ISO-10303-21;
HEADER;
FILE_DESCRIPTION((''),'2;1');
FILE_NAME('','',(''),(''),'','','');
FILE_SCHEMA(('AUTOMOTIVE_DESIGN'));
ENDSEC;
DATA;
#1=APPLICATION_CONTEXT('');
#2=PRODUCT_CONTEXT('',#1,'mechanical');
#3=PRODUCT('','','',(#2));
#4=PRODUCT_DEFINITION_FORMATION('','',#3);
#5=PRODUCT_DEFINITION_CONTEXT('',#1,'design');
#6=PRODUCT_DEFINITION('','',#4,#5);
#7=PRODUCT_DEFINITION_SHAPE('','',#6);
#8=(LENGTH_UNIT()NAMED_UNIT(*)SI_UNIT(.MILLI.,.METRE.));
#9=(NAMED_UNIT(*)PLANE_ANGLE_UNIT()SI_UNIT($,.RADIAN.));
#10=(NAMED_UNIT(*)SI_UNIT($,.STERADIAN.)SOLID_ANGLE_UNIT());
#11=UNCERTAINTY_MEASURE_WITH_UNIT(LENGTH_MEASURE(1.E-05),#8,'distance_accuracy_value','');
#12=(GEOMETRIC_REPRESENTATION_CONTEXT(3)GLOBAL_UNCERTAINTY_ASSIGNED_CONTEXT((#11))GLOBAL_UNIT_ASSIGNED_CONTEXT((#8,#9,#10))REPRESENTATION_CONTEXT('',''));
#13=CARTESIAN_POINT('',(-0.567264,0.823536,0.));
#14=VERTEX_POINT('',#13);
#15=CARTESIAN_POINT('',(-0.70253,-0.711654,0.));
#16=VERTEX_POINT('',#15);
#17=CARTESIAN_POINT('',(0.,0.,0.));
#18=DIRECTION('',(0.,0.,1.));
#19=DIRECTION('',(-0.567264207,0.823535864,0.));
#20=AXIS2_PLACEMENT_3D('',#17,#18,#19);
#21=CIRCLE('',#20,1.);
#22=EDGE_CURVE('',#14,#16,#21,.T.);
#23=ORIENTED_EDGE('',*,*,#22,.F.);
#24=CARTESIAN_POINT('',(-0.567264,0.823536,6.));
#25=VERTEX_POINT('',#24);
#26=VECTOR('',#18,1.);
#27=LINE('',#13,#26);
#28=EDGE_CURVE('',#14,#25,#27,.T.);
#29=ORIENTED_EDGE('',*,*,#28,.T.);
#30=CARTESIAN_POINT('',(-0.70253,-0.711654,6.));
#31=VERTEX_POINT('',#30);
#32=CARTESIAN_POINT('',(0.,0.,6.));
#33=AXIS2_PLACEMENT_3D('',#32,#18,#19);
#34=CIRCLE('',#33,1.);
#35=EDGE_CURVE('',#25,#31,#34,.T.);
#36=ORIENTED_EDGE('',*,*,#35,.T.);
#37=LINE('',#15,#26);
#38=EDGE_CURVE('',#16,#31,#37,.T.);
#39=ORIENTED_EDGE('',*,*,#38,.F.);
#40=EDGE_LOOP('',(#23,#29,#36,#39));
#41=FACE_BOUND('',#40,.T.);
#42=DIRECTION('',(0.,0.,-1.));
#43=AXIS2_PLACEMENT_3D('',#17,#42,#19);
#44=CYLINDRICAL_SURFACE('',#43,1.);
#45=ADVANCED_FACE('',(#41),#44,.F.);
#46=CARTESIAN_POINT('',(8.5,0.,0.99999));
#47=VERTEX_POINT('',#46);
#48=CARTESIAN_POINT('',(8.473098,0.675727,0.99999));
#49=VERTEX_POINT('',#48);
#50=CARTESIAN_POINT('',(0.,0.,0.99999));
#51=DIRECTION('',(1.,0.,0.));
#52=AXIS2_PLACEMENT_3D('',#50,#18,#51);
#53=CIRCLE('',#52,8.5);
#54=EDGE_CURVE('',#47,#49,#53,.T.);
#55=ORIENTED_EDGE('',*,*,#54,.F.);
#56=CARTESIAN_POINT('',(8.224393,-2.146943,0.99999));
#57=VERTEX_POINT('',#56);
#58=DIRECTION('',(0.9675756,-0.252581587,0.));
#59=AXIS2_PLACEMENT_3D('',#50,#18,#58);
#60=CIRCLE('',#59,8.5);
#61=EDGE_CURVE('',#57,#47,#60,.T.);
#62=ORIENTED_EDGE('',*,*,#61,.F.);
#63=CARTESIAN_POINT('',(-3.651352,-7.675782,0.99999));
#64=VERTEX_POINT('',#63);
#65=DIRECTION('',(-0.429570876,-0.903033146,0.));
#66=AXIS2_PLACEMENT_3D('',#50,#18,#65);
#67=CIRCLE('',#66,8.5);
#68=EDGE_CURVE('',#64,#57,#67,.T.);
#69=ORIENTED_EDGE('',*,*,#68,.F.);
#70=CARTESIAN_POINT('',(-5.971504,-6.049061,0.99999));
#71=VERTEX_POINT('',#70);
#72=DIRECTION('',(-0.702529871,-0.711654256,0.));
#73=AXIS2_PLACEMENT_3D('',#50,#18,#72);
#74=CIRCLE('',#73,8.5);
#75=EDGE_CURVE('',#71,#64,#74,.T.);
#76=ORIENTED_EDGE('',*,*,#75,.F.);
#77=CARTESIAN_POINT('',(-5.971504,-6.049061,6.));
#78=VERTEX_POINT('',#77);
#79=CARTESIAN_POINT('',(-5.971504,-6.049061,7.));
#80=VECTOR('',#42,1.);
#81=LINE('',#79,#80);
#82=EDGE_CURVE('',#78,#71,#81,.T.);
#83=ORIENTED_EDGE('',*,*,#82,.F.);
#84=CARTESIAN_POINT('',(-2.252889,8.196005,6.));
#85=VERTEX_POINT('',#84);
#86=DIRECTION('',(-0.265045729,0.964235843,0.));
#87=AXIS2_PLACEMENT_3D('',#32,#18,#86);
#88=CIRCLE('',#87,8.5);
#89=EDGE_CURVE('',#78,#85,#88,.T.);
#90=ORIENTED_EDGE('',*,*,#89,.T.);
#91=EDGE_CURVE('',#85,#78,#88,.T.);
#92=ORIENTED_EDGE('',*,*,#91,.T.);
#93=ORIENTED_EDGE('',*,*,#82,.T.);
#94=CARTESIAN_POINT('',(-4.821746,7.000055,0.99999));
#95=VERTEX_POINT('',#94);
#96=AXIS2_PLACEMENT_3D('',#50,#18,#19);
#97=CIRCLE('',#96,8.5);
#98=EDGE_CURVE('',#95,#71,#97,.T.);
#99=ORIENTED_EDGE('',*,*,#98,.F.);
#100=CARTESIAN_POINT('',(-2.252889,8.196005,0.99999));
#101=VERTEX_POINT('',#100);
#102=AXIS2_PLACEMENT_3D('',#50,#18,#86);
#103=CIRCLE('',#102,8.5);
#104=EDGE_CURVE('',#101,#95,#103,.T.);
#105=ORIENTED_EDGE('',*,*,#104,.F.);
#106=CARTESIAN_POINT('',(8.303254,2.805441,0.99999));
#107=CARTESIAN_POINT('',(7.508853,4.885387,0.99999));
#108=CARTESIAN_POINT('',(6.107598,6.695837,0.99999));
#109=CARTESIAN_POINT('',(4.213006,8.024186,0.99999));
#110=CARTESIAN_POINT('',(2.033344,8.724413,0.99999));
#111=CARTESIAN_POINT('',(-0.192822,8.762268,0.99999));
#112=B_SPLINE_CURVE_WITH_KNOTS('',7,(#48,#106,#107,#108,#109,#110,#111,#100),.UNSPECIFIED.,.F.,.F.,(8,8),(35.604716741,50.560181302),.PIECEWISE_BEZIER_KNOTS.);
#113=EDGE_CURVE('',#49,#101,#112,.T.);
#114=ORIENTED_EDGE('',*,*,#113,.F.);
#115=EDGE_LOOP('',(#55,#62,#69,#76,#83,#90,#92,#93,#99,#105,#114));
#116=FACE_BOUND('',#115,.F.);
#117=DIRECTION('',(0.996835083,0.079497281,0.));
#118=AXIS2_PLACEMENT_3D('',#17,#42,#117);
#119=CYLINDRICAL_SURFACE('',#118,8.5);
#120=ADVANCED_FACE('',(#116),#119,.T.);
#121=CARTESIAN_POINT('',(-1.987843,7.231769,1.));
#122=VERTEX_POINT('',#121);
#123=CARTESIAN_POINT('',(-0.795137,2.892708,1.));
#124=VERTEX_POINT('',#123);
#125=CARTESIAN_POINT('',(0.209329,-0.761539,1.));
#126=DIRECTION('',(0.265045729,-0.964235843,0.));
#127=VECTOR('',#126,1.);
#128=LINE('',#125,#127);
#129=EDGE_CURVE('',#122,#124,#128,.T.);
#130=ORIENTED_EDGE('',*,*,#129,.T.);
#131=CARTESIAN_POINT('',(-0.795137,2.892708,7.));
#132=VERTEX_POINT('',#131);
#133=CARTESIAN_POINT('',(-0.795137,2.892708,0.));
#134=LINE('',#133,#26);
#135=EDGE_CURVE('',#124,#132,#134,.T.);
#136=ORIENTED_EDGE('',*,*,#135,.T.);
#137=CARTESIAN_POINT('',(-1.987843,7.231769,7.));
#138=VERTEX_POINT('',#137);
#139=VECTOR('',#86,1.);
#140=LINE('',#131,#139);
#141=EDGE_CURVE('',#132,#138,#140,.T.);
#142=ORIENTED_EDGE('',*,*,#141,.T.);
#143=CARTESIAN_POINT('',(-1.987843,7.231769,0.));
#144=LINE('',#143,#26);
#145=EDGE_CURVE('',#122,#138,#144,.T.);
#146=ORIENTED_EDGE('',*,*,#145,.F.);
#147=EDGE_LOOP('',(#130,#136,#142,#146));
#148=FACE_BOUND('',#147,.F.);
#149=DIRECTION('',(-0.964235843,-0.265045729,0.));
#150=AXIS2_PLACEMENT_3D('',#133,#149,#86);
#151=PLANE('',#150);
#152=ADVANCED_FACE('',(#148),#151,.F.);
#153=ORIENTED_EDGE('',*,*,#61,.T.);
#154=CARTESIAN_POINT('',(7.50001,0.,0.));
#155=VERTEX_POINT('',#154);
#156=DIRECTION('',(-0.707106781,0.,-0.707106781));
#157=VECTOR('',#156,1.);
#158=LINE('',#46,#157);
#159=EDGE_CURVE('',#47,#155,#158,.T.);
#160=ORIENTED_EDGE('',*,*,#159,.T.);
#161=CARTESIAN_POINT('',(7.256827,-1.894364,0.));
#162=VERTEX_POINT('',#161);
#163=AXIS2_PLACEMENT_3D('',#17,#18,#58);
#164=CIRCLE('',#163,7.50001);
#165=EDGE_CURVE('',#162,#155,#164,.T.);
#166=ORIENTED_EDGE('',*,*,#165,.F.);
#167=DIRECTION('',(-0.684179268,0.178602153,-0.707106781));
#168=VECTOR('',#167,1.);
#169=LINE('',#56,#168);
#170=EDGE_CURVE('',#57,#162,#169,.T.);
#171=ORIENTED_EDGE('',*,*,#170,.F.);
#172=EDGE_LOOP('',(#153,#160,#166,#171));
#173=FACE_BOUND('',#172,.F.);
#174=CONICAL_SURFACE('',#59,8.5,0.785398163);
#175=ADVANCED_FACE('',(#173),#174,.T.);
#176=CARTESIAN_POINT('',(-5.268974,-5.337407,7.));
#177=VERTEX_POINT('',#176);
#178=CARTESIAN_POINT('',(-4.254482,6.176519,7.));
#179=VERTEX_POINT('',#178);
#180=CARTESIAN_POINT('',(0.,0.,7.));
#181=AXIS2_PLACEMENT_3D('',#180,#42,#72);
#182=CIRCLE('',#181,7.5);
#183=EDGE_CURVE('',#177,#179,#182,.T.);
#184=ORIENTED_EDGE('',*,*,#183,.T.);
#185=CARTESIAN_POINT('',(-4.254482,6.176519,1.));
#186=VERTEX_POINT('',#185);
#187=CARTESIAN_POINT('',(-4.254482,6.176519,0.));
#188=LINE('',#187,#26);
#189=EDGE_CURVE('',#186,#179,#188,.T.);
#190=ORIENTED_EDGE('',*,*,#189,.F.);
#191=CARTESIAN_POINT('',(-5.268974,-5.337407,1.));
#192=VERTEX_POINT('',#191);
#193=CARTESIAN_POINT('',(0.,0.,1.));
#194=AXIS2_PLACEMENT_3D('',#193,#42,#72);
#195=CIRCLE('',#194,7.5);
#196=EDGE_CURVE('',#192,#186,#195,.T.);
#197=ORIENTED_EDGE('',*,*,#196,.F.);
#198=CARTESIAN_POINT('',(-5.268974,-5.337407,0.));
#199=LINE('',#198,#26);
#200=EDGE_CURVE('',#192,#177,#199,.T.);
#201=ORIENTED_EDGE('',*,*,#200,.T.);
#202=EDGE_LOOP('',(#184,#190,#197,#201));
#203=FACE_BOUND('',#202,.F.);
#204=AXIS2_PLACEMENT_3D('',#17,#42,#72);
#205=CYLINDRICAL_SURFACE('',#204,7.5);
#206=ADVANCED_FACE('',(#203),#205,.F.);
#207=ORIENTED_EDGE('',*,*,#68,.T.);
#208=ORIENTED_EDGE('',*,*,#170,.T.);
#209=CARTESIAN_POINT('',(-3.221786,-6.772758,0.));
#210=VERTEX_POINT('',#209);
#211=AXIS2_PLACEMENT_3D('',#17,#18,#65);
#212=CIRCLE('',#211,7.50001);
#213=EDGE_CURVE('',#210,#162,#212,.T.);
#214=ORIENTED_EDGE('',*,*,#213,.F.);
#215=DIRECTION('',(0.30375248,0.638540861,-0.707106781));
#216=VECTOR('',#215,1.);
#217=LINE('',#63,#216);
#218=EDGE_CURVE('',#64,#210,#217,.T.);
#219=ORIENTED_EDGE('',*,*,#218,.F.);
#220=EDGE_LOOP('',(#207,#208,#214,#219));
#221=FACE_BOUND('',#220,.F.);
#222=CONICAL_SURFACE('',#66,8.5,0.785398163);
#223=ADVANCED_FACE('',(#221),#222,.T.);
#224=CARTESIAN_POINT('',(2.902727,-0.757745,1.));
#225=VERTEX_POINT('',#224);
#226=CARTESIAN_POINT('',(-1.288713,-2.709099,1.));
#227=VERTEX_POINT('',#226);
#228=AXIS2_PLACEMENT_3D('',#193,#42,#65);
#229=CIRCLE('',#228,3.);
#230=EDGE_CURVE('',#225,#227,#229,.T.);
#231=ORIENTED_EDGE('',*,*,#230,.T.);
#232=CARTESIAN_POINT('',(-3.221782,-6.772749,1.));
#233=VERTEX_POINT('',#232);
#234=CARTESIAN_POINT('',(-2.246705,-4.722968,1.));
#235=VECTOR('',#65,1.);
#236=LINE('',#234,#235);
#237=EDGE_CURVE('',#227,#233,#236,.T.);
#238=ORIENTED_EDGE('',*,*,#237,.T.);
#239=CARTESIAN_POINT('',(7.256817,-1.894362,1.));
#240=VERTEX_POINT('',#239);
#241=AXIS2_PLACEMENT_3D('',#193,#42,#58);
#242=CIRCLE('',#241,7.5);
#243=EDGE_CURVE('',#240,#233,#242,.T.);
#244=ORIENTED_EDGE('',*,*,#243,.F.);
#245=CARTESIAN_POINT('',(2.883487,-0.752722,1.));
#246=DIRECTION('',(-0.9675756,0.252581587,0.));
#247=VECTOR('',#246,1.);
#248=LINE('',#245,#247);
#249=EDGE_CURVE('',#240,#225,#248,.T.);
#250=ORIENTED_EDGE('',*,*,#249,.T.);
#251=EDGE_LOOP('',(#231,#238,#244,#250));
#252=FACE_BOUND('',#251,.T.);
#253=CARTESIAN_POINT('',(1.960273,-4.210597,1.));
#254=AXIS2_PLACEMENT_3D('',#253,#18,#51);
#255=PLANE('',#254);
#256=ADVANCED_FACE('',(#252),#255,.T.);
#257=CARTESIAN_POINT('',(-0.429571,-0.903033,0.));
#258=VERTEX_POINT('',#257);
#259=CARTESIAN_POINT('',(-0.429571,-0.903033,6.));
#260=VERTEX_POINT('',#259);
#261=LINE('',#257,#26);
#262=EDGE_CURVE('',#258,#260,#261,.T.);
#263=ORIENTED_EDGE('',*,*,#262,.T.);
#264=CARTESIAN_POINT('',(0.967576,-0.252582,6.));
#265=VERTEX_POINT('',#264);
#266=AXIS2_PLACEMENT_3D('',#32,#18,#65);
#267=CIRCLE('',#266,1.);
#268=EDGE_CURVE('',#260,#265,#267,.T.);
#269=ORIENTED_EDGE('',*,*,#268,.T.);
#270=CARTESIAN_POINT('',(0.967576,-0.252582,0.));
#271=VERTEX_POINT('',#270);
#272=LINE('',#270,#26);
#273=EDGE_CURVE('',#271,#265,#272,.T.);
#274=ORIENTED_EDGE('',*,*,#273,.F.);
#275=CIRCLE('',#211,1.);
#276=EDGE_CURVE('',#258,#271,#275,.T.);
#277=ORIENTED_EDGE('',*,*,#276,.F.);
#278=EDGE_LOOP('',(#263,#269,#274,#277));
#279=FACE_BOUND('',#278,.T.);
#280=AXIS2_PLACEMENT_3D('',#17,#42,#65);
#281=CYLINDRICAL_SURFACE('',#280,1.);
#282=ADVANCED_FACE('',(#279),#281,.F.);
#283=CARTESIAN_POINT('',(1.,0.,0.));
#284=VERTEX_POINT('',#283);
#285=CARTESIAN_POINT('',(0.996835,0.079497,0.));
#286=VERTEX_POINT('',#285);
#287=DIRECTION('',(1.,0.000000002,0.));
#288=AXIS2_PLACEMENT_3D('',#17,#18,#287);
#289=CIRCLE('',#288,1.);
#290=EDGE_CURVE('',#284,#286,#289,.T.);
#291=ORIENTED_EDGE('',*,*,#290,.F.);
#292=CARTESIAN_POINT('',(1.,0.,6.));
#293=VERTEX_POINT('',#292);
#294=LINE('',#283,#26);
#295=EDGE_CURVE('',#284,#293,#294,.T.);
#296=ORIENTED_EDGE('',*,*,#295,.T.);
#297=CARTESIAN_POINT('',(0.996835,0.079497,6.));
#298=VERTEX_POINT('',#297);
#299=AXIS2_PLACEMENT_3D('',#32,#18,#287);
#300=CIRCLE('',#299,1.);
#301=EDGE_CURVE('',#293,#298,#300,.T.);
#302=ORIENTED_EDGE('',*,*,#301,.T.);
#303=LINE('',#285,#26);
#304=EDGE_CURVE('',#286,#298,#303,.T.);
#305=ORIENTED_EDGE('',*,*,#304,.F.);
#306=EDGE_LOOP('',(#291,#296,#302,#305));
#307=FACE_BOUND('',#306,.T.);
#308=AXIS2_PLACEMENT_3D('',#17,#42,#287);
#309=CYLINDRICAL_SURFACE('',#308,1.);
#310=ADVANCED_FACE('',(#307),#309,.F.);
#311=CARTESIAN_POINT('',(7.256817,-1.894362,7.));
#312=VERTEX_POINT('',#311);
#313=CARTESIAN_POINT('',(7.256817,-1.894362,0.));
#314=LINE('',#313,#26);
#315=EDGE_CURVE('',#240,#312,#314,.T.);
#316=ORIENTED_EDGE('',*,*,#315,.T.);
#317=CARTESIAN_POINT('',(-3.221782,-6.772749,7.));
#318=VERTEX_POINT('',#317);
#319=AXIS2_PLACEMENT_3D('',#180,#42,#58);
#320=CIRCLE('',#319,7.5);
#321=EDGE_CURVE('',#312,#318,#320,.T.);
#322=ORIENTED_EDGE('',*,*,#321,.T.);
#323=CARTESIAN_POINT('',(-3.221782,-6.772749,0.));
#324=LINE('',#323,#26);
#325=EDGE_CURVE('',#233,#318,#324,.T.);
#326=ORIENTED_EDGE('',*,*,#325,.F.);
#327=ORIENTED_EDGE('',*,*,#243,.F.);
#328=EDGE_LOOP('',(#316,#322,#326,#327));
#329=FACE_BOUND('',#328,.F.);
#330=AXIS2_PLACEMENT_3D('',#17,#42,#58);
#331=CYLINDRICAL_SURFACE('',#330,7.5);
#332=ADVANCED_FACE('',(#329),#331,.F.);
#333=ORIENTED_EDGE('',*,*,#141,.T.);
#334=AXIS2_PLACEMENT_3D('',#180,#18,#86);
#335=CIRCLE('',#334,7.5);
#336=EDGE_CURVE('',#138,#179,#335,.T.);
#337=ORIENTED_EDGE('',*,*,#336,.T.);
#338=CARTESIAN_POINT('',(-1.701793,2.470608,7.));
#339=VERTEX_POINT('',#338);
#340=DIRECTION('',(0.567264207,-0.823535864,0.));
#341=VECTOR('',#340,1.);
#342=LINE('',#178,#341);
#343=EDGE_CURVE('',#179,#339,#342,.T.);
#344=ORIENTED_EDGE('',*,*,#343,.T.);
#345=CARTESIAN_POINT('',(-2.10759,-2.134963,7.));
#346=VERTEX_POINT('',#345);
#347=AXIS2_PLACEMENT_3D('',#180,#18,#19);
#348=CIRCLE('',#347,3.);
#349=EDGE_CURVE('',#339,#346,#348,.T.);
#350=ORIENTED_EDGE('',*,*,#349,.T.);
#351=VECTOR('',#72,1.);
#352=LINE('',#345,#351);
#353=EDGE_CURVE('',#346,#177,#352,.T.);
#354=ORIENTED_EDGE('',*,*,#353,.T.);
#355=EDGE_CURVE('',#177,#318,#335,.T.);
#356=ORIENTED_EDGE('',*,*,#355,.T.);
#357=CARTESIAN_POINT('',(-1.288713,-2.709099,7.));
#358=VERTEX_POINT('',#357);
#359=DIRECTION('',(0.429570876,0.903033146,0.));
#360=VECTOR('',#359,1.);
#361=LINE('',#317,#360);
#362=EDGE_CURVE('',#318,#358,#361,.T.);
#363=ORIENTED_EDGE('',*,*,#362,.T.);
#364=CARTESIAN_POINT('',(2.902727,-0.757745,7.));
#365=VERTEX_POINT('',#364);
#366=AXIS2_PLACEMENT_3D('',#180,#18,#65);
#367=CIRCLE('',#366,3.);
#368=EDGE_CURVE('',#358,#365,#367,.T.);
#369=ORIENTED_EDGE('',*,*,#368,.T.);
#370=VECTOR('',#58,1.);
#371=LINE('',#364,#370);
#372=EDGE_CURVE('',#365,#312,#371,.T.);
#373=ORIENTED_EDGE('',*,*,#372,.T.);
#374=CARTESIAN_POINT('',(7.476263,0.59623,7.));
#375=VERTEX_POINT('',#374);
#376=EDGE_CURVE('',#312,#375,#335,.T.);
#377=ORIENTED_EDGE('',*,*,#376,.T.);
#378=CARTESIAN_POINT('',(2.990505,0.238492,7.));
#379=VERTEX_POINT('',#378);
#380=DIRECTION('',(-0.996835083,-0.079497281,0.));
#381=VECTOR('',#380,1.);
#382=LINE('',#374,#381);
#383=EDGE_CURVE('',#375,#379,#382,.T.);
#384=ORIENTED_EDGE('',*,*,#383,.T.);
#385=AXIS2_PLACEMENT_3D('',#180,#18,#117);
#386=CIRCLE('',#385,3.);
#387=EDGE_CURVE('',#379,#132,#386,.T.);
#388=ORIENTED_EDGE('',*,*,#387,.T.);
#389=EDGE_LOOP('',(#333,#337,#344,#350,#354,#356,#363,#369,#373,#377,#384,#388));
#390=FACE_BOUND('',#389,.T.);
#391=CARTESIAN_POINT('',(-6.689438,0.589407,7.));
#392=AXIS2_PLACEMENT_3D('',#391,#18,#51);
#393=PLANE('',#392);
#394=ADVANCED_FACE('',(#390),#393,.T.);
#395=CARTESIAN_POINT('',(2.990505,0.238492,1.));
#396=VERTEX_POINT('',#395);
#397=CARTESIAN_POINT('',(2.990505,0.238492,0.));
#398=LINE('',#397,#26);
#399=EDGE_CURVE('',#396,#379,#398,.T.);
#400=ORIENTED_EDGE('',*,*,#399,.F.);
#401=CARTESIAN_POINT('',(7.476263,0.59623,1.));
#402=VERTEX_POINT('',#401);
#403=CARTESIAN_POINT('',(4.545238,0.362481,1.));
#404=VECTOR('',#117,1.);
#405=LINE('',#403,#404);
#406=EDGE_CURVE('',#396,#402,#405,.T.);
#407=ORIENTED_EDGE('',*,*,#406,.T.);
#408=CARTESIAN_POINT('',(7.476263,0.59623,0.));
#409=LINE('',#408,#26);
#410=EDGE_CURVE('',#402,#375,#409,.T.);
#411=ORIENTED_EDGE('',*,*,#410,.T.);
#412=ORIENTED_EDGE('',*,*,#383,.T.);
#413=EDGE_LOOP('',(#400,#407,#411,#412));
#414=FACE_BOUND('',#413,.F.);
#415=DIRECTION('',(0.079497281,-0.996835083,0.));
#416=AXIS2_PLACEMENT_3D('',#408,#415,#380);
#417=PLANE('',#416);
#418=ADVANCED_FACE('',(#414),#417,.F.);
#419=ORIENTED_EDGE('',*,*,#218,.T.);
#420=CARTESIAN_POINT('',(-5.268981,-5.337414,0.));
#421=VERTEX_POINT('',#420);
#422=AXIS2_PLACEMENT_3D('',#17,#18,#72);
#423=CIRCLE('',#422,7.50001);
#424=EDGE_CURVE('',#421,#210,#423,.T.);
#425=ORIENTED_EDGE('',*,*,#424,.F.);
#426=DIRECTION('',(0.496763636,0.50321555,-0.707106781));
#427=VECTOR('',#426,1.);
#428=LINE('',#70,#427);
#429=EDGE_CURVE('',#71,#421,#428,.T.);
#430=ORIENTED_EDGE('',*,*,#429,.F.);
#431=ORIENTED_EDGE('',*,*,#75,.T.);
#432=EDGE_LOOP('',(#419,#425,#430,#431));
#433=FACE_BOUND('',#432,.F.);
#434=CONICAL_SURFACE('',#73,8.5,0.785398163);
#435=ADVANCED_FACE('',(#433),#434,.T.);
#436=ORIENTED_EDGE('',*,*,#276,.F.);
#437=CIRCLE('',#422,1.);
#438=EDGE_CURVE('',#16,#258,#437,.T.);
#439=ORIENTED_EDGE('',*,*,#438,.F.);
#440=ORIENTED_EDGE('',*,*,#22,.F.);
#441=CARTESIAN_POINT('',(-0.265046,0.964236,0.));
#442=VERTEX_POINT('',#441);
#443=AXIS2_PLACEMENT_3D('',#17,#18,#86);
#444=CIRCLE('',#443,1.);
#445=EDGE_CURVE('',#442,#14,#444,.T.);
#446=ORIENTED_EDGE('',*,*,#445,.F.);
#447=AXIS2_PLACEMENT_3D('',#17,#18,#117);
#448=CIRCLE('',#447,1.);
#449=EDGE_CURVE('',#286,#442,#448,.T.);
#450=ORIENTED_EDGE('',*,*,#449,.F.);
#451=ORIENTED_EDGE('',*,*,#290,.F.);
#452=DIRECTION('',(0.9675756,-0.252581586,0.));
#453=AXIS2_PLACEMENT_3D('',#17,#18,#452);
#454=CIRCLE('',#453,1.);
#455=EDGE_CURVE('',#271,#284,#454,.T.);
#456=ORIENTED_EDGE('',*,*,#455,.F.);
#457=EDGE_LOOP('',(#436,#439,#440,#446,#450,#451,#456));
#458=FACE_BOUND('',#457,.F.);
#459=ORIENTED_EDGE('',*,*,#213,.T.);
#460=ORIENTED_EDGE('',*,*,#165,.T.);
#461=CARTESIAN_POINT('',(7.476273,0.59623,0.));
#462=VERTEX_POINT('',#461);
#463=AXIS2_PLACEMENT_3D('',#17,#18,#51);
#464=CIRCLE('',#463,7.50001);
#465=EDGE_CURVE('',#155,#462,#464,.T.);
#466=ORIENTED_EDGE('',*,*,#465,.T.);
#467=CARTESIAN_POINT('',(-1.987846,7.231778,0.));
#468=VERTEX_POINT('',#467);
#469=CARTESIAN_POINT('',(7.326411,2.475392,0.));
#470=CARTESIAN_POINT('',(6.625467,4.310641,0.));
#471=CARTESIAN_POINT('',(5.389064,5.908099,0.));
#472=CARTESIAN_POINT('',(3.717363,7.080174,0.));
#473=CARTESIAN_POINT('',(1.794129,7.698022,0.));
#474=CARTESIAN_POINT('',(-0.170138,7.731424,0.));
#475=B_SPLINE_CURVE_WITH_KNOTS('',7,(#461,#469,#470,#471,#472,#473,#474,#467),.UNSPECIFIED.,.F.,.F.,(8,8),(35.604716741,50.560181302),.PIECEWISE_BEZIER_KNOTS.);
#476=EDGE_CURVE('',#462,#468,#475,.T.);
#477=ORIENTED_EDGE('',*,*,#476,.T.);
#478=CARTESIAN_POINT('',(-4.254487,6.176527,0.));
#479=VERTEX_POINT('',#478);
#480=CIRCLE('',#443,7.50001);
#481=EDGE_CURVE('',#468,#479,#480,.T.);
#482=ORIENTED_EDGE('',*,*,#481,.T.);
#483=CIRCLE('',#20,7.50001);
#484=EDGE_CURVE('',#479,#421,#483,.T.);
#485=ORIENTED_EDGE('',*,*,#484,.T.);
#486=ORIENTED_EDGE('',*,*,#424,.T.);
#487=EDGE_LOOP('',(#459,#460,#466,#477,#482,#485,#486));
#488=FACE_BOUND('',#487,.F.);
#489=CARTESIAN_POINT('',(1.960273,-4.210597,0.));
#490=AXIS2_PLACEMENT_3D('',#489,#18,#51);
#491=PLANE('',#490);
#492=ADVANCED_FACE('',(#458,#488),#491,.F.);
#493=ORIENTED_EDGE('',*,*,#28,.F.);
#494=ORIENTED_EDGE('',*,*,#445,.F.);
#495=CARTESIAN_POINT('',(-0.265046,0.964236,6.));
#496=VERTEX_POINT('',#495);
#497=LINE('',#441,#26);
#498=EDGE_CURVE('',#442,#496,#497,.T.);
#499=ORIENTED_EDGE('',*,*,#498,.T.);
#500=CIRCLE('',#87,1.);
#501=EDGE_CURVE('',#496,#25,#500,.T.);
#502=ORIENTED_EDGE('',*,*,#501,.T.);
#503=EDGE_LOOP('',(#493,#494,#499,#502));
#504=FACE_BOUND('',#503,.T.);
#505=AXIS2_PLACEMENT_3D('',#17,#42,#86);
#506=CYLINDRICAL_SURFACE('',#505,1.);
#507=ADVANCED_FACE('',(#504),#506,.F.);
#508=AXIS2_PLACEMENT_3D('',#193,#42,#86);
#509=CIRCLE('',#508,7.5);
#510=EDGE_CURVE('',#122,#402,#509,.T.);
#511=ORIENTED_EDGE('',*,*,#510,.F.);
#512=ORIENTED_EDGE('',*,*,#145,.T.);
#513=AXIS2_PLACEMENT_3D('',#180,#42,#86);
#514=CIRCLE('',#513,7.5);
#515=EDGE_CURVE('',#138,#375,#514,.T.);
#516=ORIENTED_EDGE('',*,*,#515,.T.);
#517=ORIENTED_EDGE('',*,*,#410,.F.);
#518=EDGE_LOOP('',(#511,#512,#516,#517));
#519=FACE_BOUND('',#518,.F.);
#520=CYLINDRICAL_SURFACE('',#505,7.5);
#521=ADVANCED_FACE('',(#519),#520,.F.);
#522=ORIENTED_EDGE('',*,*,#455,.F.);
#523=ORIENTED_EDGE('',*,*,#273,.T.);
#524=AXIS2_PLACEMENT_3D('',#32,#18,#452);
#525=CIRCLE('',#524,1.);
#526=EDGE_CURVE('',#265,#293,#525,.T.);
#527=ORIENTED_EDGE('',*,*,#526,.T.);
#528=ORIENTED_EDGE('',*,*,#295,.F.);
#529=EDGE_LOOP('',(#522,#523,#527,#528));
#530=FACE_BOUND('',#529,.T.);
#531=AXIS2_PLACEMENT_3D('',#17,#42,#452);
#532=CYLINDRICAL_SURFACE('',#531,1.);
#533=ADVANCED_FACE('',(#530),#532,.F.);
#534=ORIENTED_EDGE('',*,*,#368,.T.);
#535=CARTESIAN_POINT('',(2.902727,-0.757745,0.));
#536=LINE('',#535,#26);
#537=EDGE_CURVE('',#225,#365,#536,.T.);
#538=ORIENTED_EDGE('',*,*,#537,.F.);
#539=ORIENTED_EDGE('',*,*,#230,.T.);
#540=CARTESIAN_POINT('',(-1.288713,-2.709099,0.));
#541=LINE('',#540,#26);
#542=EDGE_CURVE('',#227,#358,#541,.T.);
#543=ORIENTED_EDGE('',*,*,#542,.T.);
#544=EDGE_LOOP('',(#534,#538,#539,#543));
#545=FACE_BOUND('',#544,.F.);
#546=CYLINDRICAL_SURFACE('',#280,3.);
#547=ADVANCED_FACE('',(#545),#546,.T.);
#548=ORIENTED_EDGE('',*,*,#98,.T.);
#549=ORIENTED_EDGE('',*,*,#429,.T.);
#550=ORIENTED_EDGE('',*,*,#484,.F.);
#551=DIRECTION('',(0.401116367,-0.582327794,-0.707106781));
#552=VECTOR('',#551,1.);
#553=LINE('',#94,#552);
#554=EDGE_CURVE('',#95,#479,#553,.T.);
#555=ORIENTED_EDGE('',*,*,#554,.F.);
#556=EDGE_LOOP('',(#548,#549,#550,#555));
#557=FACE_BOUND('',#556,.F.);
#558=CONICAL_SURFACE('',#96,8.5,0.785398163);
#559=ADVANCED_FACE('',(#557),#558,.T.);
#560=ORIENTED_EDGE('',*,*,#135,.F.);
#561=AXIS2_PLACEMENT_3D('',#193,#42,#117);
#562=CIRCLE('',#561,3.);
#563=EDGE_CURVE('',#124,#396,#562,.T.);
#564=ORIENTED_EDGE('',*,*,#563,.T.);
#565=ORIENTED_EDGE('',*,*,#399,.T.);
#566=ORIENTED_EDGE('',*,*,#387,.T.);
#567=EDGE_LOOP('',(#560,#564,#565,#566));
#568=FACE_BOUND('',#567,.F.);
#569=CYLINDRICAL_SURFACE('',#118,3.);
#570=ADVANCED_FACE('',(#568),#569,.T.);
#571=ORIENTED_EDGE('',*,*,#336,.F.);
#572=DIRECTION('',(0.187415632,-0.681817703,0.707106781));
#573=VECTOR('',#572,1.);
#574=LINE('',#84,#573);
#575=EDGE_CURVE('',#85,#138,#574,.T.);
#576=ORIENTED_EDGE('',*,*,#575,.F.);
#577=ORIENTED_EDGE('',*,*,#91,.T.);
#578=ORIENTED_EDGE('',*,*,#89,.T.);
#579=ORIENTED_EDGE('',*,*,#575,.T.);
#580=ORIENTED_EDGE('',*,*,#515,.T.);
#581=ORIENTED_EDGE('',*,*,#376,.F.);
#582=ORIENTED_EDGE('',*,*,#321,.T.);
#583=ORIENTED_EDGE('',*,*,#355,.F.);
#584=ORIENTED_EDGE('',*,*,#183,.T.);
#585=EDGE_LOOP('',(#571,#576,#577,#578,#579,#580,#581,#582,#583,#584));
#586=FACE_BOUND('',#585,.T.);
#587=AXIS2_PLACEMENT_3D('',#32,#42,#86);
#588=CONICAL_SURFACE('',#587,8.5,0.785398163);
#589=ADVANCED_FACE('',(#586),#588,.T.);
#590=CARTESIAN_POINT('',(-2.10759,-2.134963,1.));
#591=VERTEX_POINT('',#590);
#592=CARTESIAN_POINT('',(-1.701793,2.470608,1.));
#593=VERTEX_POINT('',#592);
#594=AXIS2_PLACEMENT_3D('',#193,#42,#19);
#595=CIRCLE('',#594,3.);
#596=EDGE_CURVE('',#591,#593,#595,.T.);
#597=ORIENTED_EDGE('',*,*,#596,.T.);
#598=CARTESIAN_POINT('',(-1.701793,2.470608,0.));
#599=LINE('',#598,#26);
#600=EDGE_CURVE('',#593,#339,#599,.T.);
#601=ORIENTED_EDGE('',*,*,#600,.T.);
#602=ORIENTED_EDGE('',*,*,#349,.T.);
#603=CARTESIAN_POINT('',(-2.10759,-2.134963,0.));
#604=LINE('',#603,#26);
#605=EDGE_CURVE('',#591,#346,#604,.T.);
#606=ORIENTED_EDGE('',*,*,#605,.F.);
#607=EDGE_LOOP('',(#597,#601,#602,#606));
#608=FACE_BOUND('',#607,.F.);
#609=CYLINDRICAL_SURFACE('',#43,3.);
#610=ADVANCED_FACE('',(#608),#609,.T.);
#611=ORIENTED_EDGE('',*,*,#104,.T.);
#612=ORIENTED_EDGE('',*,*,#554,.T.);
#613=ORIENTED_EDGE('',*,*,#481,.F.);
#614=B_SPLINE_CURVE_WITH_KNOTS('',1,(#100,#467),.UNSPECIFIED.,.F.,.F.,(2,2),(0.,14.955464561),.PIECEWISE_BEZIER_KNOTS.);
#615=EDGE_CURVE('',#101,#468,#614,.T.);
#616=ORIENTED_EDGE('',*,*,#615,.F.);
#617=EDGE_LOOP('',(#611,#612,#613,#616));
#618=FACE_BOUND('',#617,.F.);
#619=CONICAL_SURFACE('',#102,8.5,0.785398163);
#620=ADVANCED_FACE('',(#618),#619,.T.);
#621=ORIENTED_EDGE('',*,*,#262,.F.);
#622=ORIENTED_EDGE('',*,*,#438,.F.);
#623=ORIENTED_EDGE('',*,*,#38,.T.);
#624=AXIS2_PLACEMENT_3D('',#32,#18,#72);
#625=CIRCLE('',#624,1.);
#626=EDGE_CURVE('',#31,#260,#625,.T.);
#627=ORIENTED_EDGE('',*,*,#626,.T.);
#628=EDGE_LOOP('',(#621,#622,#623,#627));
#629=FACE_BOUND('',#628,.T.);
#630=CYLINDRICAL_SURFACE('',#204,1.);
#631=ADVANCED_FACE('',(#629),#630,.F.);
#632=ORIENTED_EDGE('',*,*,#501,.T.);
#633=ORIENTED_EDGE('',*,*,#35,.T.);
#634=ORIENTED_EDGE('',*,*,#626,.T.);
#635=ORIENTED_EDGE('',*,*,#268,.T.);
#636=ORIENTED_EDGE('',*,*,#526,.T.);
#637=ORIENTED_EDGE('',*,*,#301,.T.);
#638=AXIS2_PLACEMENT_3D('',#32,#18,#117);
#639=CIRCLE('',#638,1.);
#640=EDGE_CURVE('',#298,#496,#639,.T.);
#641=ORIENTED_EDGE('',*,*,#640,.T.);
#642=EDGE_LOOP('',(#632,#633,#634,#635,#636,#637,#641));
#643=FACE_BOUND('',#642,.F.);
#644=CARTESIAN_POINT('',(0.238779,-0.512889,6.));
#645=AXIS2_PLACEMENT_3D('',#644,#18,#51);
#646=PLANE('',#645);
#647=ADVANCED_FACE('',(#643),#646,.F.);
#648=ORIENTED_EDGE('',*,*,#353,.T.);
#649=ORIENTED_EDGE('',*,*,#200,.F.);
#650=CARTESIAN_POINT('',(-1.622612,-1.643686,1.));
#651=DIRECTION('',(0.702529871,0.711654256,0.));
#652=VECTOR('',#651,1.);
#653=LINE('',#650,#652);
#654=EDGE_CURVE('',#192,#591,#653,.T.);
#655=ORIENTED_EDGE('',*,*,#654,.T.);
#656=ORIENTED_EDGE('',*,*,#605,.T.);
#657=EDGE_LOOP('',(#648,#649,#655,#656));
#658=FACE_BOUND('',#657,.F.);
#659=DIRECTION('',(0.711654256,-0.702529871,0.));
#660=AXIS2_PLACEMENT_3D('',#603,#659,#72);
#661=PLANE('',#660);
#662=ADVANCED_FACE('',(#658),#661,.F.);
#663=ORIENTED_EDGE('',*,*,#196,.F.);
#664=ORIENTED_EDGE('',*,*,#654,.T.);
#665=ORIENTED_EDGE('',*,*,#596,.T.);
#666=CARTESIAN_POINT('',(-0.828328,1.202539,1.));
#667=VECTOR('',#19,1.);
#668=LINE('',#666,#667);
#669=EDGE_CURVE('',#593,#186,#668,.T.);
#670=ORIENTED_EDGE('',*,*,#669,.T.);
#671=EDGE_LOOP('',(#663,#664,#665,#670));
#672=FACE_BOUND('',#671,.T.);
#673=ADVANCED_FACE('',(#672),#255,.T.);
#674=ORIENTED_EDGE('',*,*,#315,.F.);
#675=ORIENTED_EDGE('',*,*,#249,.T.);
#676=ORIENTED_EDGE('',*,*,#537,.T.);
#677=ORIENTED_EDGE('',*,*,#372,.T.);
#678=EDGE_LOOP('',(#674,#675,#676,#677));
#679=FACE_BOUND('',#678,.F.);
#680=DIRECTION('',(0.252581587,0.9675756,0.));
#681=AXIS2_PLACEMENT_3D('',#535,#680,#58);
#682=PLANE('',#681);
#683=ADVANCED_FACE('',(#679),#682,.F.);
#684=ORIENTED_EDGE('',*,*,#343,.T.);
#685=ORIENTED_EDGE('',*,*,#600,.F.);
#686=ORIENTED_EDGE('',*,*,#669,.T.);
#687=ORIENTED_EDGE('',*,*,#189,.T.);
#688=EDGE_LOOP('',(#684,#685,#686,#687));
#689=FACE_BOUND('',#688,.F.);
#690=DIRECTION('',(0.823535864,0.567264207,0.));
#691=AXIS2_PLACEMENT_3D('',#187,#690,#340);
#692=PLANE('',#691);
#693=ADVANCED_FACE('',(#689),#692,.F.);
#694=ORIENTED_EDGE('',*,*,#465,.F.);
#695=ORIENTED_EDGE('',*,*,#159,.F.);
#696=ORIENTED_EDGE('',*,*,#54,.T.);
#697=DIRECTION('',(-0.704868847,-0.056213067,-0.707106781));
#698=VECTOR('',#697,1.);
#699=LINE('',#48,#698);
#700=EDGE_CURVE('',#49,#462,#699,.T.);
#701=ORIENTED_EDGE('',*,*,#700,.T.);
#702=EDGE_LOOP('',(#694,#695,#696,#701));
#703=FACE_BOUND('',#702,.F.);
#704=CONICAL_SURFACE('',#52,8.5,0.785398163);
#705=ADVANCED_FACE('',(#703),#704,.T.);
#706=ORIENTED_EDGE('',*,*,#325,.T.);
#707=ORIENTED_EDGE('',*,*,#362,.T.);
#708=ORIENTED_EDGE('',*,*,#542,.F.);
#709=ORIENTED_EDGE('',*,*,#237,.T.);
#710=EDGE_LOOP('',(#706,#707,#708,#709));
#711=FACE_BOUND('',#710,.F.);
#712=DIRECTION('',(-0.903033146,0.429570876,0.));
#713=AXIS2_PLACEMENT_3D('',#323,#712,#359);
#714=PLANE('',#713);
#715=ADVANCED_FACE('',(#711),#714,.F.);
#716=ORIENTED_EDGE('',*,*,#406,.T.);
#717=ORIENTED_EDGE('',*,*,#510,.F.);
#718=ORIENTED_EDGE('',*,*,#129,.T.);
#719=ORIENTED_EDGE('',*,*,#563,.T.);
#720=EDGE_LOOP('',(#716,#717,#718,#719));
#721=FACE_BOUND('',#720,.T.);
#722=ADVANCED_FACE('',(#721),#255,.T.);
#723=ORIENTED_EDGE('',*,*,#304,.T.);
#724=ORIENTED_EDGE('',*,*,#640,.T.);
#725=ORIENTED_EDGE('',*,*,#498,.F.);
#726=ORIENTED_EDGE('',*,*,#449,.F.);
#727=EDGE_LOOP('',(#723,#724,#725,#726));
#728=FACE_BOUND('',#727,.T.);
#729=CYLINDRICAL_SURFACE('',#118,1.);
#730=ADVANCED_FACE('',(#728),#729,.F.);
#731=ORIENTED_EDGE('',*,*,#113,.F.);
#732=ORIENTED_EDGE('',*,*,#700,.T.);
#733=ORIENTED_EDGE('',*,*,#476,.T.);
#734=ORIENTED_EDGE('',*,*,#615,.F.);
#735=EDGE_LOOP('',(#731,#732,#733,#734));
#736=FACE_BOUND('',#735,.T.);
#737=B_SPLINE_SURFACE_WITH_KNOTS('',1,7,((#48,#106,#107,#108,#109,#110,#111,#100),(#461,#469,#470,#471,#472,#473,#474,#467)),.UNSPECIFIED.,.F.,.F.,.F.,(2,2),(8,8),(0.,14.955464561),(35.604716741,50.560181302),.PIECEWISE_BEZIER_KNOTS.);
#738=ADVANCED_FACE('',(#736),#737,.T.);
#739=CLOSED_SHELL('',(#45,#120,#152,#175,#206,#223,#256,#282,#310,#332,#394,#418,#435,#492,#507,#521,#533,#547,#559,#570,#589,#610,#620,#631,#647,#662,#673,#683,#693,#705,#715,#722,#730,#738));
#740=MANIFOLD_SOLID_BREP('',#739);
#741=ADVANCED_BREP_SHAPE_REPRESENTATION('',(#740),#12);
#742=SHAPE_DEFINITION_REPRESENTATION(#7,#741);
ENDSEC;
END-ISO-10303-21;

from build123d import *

# Parameters (mm, degrees)
F1_DEPTH = 1
F2_DEPTH = 7
F3_DEPTH = 6
F5_SIZE  = 0.99999


# Not quite as in the source:
# - a fillet or chamfer that OpenCascade refuses, or shapes differently, is made with other operations: its cross-section is extruded or revolved along the edge and cut away or added
# - a fillet or chamfer is up to 0.001 mm smaller than in the source, because OpenCascade refuses the exact size


with BuildPart() as f1:
    # F0 (on Top) → F1 (new body)
    with BuildSketch(Plane.XY):
        with BuildLine():
            ThreePointArc((-3.2217815715, -6.7727485931), (3.1654449772, -6.7992615846), (7.2568170006, -1.8943619029))
            Line((7.2568170006, -1.8943619029), (2.9027268003, -0.7577447612))
            ThreePointArc((2.9027268003, -0.7577447612), (1.2661779909, -2.7197046339), (-1.2887126286, -2.7090994373))
            Line((-1.2887126286, -2.7090994373), (-3.2217815715, -6.7727485931))
        make_face()
        with BuildLine():
            Line((-1.7017926197, 2.4706075932), (-4.2544815494, 6.1765189829))
            ThreePointArc((-4.2544815494, 6.1765189829), (-7.4710557479, 0.6582750278), (-5.2689740322, -5.3374069217))
            Line((-5.2689740322, -5.3374069217), (-2.1075896129, -2.1349627687))
            ThreePointArc((-2.1075896129, -2.1349627687), (-2.9884222991, 0.2633100111), (-1.7017926197, 2.4706075932))
        make_face()
        with BuildLine():
            ThreePointArc((3, 0), (2.9976253723, 0.119340385), (2.9905052483, 0.2384918441))
            Line((2.9905052483, 0.2384918441), (0.9968350828, 0.0794972814))
            ThreePointArc((0.9968350828, 0.0794972814), (0.9992084574, 0.0397801283), (1, 0))
            ThreePointArc((1, 0), (0.9918607765, -0.1273271376), (0.9675756001, -0.2525815871))
            Line((0.9675756001, -0.2525815871), (2.9027268003, -0.7577447612))
            ThreePointArc((2.9027268003, -0.7577447612), (2.9755823296, -0.3819814127), (3, 0))
        make_face()
        with BuildLine():
            Line((-0.7951371874, 2.8927075298), (-1.9878429685, 7.2317688246))
            ThreePointArc((-1.9878429685, 7.2317688246), (-3.1654449772, 6.7992615846), (-4.2544815494, 6.1765189829))
            Line((-4.2544815494, 6.1765189829), (-1.7017926197, 2.4706075932))
            ThreePointArc((-1.7017926197, 2.4706075932), (-1.2661779909, 2.7197046339), (-0.7951371874, 2.8927075298))
        make_face()
        with BuildLine():
            ThreePointArc((-5.2689740322, -5.3374069217), (-4.3056107707, -6.1409865568), (-3.2217815715, -6.7727485931))
            Line((-3.2217815715, -6.7727485931), (-1.2887126286, -2.7090994373))
            ThreePointArc((-1.2887126286, -2.7090994373), (-1.7222443083, -2.4563946227), (-2.1075896129, -2.1349627687))
            Line((-2.1075896129, -2.1349627687), (-5.2689740322, -5.3374069217))
        make_face()
        with BuildLine():
            ThreePointArc((-2.1075896129, -2.1349627687), (-1.7222443083, -2.4563946227), (-1.2887126286, -2.7090994373))
            Line((-1.2887126286, -2.7090994373), (-0.4295708762, -0.9030331458))
            ThreePointArc((-0.4295708762, -0.9030331458), (-0.5740814361, -0.8187982076), (-0.702529871, -0.7116542562))
            Line((-0.702529871, -0.7116542562), (-2.1075896129, -2.1349627687))
        make_face()
        with BuildLine():
            Line((-0.2650457291, 0.9642358433), (-0.7951371874, 2.8927075298))
            ThreePointArc((-0.7951371874, 2.8927075298), (-1.2661779909, 2.7197046339), (-1.7017926197, 2.4706075932))
            Line((-1.7017926197, 2.4706075932), (-0.5672642066, 0.8235358644))
            ThreePointArc((-0.5672642066, 0.8235358644), (-0.4220593303, 0.9065682113), (-0.2650457291, 0.9642358433))
        make_face()
        with BuildLine():
            ThreePointArc((-1.2887126286, -2.7090994373), (1.2661779909, -2.7197046339), (2.9027268003, -0.7577447612))
            Line((2.9027268003, -0.7577447612), (0.9675756001, -0.2525815871))
            ThreePointArc((0.9675756001, -0.2525815871), (0.4220593303, -0.9065682113), (-0.4295708762, -0.9030331458))
            Line((-0.4295708762, -0.9030331458), (-1.2887126286, -2.7090994373))
        make_face()
        with BuildLine():
            Line((-0.5672642066, 0.8235358644), (-1.7017926197, 2.4706075932))
            ThreePointArc((-1.7017926197, 2.4706075932), (-2.9884222991, 0.2633100111), (-2.1075896129, -2.1349627687))
            Line((-2.1075896129, -2.1349627687), (-0.702529871, -0.7116542562))
            ThreePointArc((-0.702529871, -0.7116542562), (-0.9961407664, 0.0877700037), (-0.5672642066, 0.8235358644))
        make_face()
        with BuildLine():
            Line((2.9905052483, 0.2384918441), (7.4762631208, 0.5962296102))
            ThreePointArc((7.4762631208, 0.5962296102), (4.3056107707, 6.1409865568), (-1.9878429685, 7.2317688246))
            Line((-1.9878429685, 7.2317688246), (-0.7951371874, 2.8927075298))
            ThreePointArc((-0.7951371874, 2.8927075298), (1.7222443083, 2.4563946227), (2.9905052483, 0.2384918441))
        make_face()
        with BuildLine():
            Line((0.9968350828, 0.0794972814), (2.9905052483, 0.2384918441))
            ThreePointArc((2.9905052483, 0.2384918441), (1.7222443083, 2.4563946227), (-0.7951371874, 2.8927075298))
            Line((-0.7951371874, 2.8927075298), (-0.2650457291, 0.9642358433))
            ThreePointArc((-0.2650457291, 0.9642358433), (0.5740814361, 0.8187982076), (0.9968350828, 0.0794972814))
        make_face()
        with BuildLine():
            ThreePointArc((7.5, 0), (7.4940634307, 0.2983509626), (7.4762631208, 0.5962296102))
            Line((7.4762631208, 0.5962296102), (2.9905052483, 0.2384918441))
            ThreePointArc((2.9905052483, 0.2384918441), (2.9976253723, 0.119340385), (3, 0))
            ThreePointArc((3, 0), (2.9755823296, -0.3819814127), (2.9027268003, -0.7577447612))
            Line((2.9027268003, -0.7577447612), (7.2568170006, -1.8943619029))
            ThreePointArc((7.2568170006, -1.8943619029), (7.4389558241, -0.9549535316), (7.5, 0))
        make_face()
        with BuildLine():
            Line((7.4762631208, 0.5962296102), (8.4730982036, 0.6757268916))
            ThreePointArc((8.4730982036, 0.6757268916), (4.8796922068, 6.9597847644), (-2.2528886976, 8.1960046679))
            Line((-2.2528886976, 8.1960046679), (-1.9878429685, 7.2317688246))
            ThreePointArc((-1.9878429685, 7.2317688246), (4.3056107707, 6.1409865568), (7.4762631208, 0.5962296102))
        make_face()
        with BuildLine():
            Line((-1.9878429685, 7.2317688246), (-2.2528886976, 8.1960046679))
            ThreePointArc((-2.2528886976, 8.1960046679), (-3.5875043075, 7.7058297959), (-4.821745756, 7.0000548473))
            Line((-4.821745756, 7.0000548473), (-4.2544815494, 6.1765189829))
            ThreePointArc((-4.2544815494, 6.1765189829), (-3.1654449772, 6.7992615846), (-1.9878429685, 7.2317688246))
        make_face()
        with BuildLine():
            Line((-4.2544815494, 6.1765189829), (-4.821745756, 7.0000548473))
            ThreePointArc((-4.821745756, 7.0000548473), (-8.4671965143, 0.7460450315), (-5.9715039032, -6.049061178))
            Line((-5.9715039032, -6.049061178), (-5.2689740322, -5.3374069217))
            ThreePointArc((-5.2689740322, -5.3374069217), (-7.4710557479, 0.6582750278), (-4.2544815494, 6.1765189829))
        make_face()
        with BuildLine():
            ThreePointArc((-5.9715039032, -6.049061178), (-4.8796922068, -6.9597847644), (-3.6513524477, -7.6757817389))
            Line((-3.6513524477, -7.6757817389), (-3.2217815715, -6.7727485931))
            ThreePointArc((-3.2217815715, -6.7727485931), (-4.3056107707, -6.1409865568), (-5.2689740322, -5.3374069217))
            Line((-5.2689740322, -5.3374069217), (-5.9715039032, -6.049061178))
        make_face()
        with BuildLine():
            ThreePointArc((-3.6513524477, -7.6757817389), (3.5875043075, -7.7058297959), (8.2243926007, -2.14694349))
            Line((8.2243926007, -2.14694349), (7.2568170006, -1.8943619029))
            ThreePointArc((7.2568170006, -1.8943619029), (3.1654449772, -6.7992615846), (-3.2217815715, -6.7727485931))
            Line((-3.2217815715, -6.7727485931), (-3.6513524477, -7.6757817389))
        make_face()
        with BuildLine():
            ThreePointArc((8.2243926007, -2.14694349), (8.4308166006, -1.0822806692), (8.5, 0))
            ThreePointArc((8.5, 0), (8.4932718881, 0.338131091), (8.4730982036, 0.6757268916))
            Line((8.4730982036, 0.6757268916), (7.4762631208, 0.5962296102))
            ThreePointArc((7.4762631208, 0.5962296102), (7.4940634307, 0.2983509626), (7.5, 0))
            ThreePointArc((7.5, 0), (7.4389558241, -0.9549535316), (7.2568170006, -1.8943619029))
            Line((7.2568170006, -1.8943619029), (8.2243926007, -2.14694349))
        make_face()
    extrude(amount=F1_DEPTH)

    # F0 (on Top) → F2 (join)
    with BuildSketch(Plane.XY):
        with BuildLine():
            Line((-4.2544815494, 6.1765189829), (-4.821745756, 7.0000548473))
            ThreePointArc((-4.821745756, 7.0000548473), (-8.4671965143, 0.7460450315), (-5.9715039032, -6.049061178))
            Line((-5.9715039032, -6.049061178), (-5.2689740322, -5.3374069217))
            ThreePointArc((-5.2689740322, -5.3374069217), (-7.4710557479, 0.6582750278), (-4.2544815494, 6.1765189829))
        make_face()
        with BuildLine():
            ThreePointArc((-5.9715039032, -6.049061178), (-4.8796922068, -6.9597847644), (-3.6513524477, -7.6757817389))
            Line((-3.6513524477, -7.6757817389), (-3.2217815715, -6.7727485931))
            ThreePointArc((-3.2217815715, -6.7727485931), (-4.3056107707, -6.1409865568), (-5.2689740322, -5.3374069217))
            Line((-5.2689740322, -5.3374069217), (-5.9715039032, -6.049061178))
        make_face()
        with BuildLine():
            ThreePointArc((-3.6513524477, -7.6757817389), (3.5875043075, -7.7058297959), (8.2243926007, -2.14694349))
            Line((8.2243926007, -2.14694349), (7.2568170006, -1.8943619029))
            ThreePointArc((7.2568170006, -1.8943619029), (3.1654449772, -6.7992615846), (-3.2217815715, -6.7727485931))
            Line((-3.2217815715, -6.7727485931), (-3.6513524477, -7.6757817389))
        make_face()
        with BuildLine():
            ThreePointArc((8.2243926007, -2.14694349), (8.4308166006, -1.0822806692), (8.5, 0))
            ThreePointArc((8.5, 0), (8.4932718881, 0.338131091), (8.4730982036, 0.6757268916))
            Line((8.4730982036, 0.6757268916), (7.4762631208, 0.5962296102))
            ThreePointArc((7.4762631208, 0.5962296102), (7.4940634307, 0.2983509626), (7.5, 0))
            ThreePointArc((7.5, 0), (7.4389558241, -0.9549535316), (7.2568170006, -1.8943619029))
            Line((7.2568170006, -1.8943619029), (8.2243926007, -2.14694349))
        make_face()
        with BuildLine():
            Line((7.4762631208, 0.5962296102), (8.4730982036, 0.6757268916))
            ThreePointArc((8.4730982036, 0.6757268916), (4.8796922068, 6.9597847644), (-2.2528886976, 8.1960046679))
            Line((-2.2528886976, 8.1960046679), (-1.9878429685, 7.2317688246))
            ThreePointArc((-1.9878429685, 7.2317688246), (4.3056107707, 6.1409865568), (7.4762631208, 0.5962296102))
        make_face()
        with BuildLine():
            Line((-1.9878429685, 7.2317688246), (-2.2528886976, 8.1960046679))
            ThreePointArc((-2.2528886976, 8.1960046679), (-3.5875043075, 7.7058297959), (-4.821745756, 7.0000548473))
            Line((-4.821745756, 7.0000548473), (-4.2544815494, 6.1765189829))
            ThreePointArc((-4.2544815494, 6.1765189829), (-3.1654449772, 6.7992615846), (-1.9878429685, 7.2317688246))
        make_face()
        with BuildLine():
            Line((-0.2650457291, 0.9642358433), (-0.7951371874, 2.8927075298))
            ThreePointArc((-0.7951371874, 2.8927075298), (-1.2661779909, 2.7197046339), (-1.7017926197, 2.4706075932))
            Line((-1.7017926197, 2.4706075932), (-0.5672642066, 0.8235358644))
            ThreePointArc((-0.5672642066, 0.8235358644), (-0.4220593303, 0.9065682113), (-0.2650457291, 0.9642358433))
        make_face()
        with BuildLine():
            Line((-0.5672642066, 0.8235358644), (-1.7017926197, 2.4706075932))
            ThreePointArc((-1.7017926197, 2.4706075932), (-2.9884222991, 0.2633100111), (-2.1075896129, -2.1349627687))
            Line((-2.1075896129, -2.1349627687), (-0.702529871, -0.7116542562))
            ThreePointArc((-0.702529871, -0.7116542562), (-0.9961407664, 0.0877700037), (-0.5672642066, 0.8235358644))
        make_face()
        with BuildLine():
            ThreePointArc((-2.1075896129, -2.1349627687), (-1.7222443083, -2.4563946227), (-1.2887126286, -2.7090994373))
            Line((-1.2887126286, -2.7090994373), (-0.4295708762, -0.9030331458))
            ThreePointArc((-0.4295708762, -0.9030331458), (-0.5740814361, -0.8187982076), (-0.702529871, -0.7116542562))
            Line((-0.702529871, -0.7116542562), (-2.1075896129, -2.1349627687))
        make_face()
        with BuildLine():
            ThreePointArc((-1.2887126286, -2.7090994373), (1.2661779909, -2.7197046339), (2.9027268003, -0.7577447612))
            Line((2.9027268003, -0.7577447612), (0.9675756001, -0.2525815871))
            ThreePointArc((0.9675756001, -0.2525815871), (0.4220593303, -0.9065682113), (-0.4295708762, -0.9030331458))
            Line((-0.4295708762, -0.9030331458), (-1.2887126286, -2.7090994373))
        make_face()
        with BuildLine():
            ThreePointArc((3, 0), (2.9976253723, 0.119340385), (2.9905052483, 0.2384918441))
            Line((2.9905052483, 0.2384918441), (0.9968350828, 0.0794972814))
            ThreePointArc((0.9968350828, 0.0794972814), (0.9992084574, 0.0397801283), (1, 0))
            ThreePointArc((1, 0), (0.9918607765, -0.1273271376), (0.9675756001, -0.2525815871))
            Line((0.9675756001, -0.2525815871), (2.9027268003, -0.7577447612))
            ThreePointArc((2.9027268003, -0.7577447612), (2.9755823296, -0.3819814127), (3, 0))
        make_face()
        with BuildLine():
            Line((0.9968350828, 0.0794972814), (2.9905052483, 0.2384918441))
            ThreePointArc((2.9905052483, 0.2384918441), (1.7222443083, 2.4563946227), (-0.7951371874, 2.8927075298))
            Line((-0.7951371874, 2.8927075298), (-0.2650457291, 0.9642358433))
            ThreePointArc((-0.2650457291, 0.9642358433), (0.5740814361, 0.8187982076), (0.9968350828, 0.0794972814))
        make_face()
        with BuildLine():
            Line((-0.7951371874, 2.8927075298), (-1.9878429685, 7.2317688246))
            ThreePointArc((-1.9878429685, 7.2317688246), (-3.1654449772, 6.7992615846), (-4.2544815494, 6.1765189829))
            Line((-4.2544815494, 6.1765189829), (-1.7017926197, 2.4706075932))
            ThreePointArc((-1.7017926197, 2.4706075932), (-1.2661779909, 2.7197046339), (-0.7951371874, 2.8927075298))
        make_face()
        with BuildLine():
            ThreePointArc((-5.2689740322, -5.3374069217), (-4.3056107707, -6.1409865568), (-3.2217815715, -6.7727485931))
            Line((-3.2217815715, -6.7727485931), (-1.2887126286, -2.7090994373))
            ThreePointArc((-1.2887126286, -2.7090994373), (-1.7222443083, -2.4563946227), (-2.1075896129, -2.1349627687))
            Line((-2.1075896129, -2.1349627687), (-5.2689740322, -5.3374069217))
        make_face()
        with BuildLine():
            ThreePointArc((7.5, 0), (7.4940634307, 0.2983509626), (7.4762631208, 0.5962296102))
            Line((7.4762631208, 0.5962296102), (2.9905052483, 0.2384918441))
            ThreePointArc((2.9905052483, 0.2384918441), (2.9976253723, 0.119340385), (3, 0))
            ThreePointArc((3, 0), (2.9755823296, -0.3819814127), (2.9027268003, -0.7577447612))
            Line((2.9027268003, -0.7577447612), (7.2568170006, -1.8943619029))
            ThreePointArc((7.2568170006, -1.8943619029), (7.4389558241, -0.9549535316), (7.5, 0))
        make_face()
        with BuildLine():
            Line((0, 0), (-0.2650457291, 0.9642358433))
            ThreePointArc((-0.2650457291, 0.9642358433), (-0.4220593303, 0.9065682113), (-0.5672642066, 0.8235358644))
            Line((-0.5672642066, 0.8235358644), (0, 0))
        make_face()
        with BuildLine():
            Line((-0.702529871, -0.7116542562), (0, 0))
            Line((0, 0), (-0.5672642066, 0.8235358644))
            ThreePointArc((-0.5672642066, 0.8235358644), (-0.9961407664, 0.0877700037), (-0.702529871, -0.7116542562))
        make_face()
        with BuildLine():
            Line((-0.4295708762, -0.9030331458), (0, 0))
            Line((0, 0), (-0.702529871, -0.7116542562))
            ThreePointArc((-0.702529871, -0.7116542562), (-0.5740814361, -0.8187982076), (-0.4295708762, -0.9030331458))
        make_face()
        with BuildLine():
            ThreePointArc((-0.4295708762, -0.9030331458), (0.4220593303, -0.9065682113), (0.9675756001, -0.2525815871))
            Line((0.9675756001, -0.2525815871), (0, 0))
            Line((0, 0), (-0.4295708762, -0.9030331458))
        make_face()
        with BuildLine():
            ThreePointArc((1, 0), (0.9992084574, 0.0397801283), (0.9968350828, 0.0794972814))
            Line((0.9968350828, 0.0794972814), (0, 0))
            Line((0, 0), (0.9675756001, -0.2525815871))
            ThreePointArc((0.9675756001, -0.2525815871), (0.9918607765, -0.1273271376), (1, 0))
        make_face()
        with BuildLine():
            Line((0, 0), (0.9968350828, 0.0794972814))
            ThreePointArc((0.9968350828, 0.0794972814), (0.5740814361, 0.8187982076), (-0.2650457291, 0.9642358433))
            Line((-0.2650457291, 0.9642358433), (0, 0))
        make_face()
    extrude(amount=F2_DEPTH)

    # F0 (on Top) → F3 (cut)
    with BuildSketch(Plane.XY):
        with BuildLine():
            ThreePointArc((-0.4295708762, -0.9030331458), (0.4220593303, -0.9065682113), (0.9675756001, -0.2525815871))
            Line((0.9675756001, -0.2525815871), (0, 0))
            Line((0, 0), (-0.4295708762, -0.9030331458))
        make_face()
        with BuildLine():
            ThreePointArc((1, 0), (0.9992084574, 0.0397801283), (0.9968350828, 0.0794972814))
            Line((0.9968350828, 0.0794972814), (0, 0))
            Line((0, 0), (0.9675756001, -0.2525815871))
            ThreePointArc((0.9675756001, -0.2525815871), (0.9918607765, -0.1273271376), (1, 0))
        make_face()
        with BuildLine():
            Line((0, 0), (0.9968350828, 0.0794972814))
            ThreePointArc((0.9968350828, 0.0794972814), (0.5740814361, 0.8187982076), (-0.2650457291, 0.9642358433))
            Line((-0.2650457291, 0.9642358433), (0, 0))
        make_face()
        with BuildLine():
            Line((-0.702529871, -0.7116542562), (0, 0))
            Line((0, 0), (-0.5672642066, 0.8235358644))
            ThreePointArc((-0.5672642066, 0.8235358644), (-0.9961407664, 0.0877700037), (-0.702529871, -0.7116542562))
        make_face()
        with BuildLine():
            Line((-0.4295708762, -0.9030331458), (0, 0))
            Line((0, 0), (-0.702529871, -0.7116542562))
            ThreePointArc((-0.702529871, -0.7116542562), (-0.5740814361, -0.8187982076), (-0.4295708762, -0.9030331458))
        make_face()
        with BuildLine():
            Line((0, 0), (-0.2650457291, 0.9642358433))
            ThreePointArc((-0.2650457291, 0.9642358433), (-0.4220593303, 0.9065682113), (-0.5672642066, 0.8235358644))
            Line((-0.5672642066, 0.8235358644), (0, 0))
        make_face()
    extrude(amount=F3_DEPTH, mode=Mode.SUBTRACT)

    # F4: chamfer of 1 on 1 edges, made by hand

    # F4_s1 → F4_t2 (revolve, cut)
    with BuildSketch(Plane(origin=(0, 0, 0), x_dir=(0, 0, 1), z_dir=(0.9642358433, 0.2650457291, 0))):
        Polygon((6, -8.5), (7, -7.5), (7, -8.5), align=None)
    revolve(axis=Axis((0, 0, 7), (0, 0, 1)), mode=Mode.SUBTRACT)

    # F5 (size 1 in the source; OpenCascade refuses exactly that, so slightly less here)
    f5_edges = [f1.edges().sort_by_distance(p)[0] for p in [
        (-8.224393, 2.146943, 0),
    ]]
    chamfer(f5_edges, length=F5_SIZE)


solid = f1.part
